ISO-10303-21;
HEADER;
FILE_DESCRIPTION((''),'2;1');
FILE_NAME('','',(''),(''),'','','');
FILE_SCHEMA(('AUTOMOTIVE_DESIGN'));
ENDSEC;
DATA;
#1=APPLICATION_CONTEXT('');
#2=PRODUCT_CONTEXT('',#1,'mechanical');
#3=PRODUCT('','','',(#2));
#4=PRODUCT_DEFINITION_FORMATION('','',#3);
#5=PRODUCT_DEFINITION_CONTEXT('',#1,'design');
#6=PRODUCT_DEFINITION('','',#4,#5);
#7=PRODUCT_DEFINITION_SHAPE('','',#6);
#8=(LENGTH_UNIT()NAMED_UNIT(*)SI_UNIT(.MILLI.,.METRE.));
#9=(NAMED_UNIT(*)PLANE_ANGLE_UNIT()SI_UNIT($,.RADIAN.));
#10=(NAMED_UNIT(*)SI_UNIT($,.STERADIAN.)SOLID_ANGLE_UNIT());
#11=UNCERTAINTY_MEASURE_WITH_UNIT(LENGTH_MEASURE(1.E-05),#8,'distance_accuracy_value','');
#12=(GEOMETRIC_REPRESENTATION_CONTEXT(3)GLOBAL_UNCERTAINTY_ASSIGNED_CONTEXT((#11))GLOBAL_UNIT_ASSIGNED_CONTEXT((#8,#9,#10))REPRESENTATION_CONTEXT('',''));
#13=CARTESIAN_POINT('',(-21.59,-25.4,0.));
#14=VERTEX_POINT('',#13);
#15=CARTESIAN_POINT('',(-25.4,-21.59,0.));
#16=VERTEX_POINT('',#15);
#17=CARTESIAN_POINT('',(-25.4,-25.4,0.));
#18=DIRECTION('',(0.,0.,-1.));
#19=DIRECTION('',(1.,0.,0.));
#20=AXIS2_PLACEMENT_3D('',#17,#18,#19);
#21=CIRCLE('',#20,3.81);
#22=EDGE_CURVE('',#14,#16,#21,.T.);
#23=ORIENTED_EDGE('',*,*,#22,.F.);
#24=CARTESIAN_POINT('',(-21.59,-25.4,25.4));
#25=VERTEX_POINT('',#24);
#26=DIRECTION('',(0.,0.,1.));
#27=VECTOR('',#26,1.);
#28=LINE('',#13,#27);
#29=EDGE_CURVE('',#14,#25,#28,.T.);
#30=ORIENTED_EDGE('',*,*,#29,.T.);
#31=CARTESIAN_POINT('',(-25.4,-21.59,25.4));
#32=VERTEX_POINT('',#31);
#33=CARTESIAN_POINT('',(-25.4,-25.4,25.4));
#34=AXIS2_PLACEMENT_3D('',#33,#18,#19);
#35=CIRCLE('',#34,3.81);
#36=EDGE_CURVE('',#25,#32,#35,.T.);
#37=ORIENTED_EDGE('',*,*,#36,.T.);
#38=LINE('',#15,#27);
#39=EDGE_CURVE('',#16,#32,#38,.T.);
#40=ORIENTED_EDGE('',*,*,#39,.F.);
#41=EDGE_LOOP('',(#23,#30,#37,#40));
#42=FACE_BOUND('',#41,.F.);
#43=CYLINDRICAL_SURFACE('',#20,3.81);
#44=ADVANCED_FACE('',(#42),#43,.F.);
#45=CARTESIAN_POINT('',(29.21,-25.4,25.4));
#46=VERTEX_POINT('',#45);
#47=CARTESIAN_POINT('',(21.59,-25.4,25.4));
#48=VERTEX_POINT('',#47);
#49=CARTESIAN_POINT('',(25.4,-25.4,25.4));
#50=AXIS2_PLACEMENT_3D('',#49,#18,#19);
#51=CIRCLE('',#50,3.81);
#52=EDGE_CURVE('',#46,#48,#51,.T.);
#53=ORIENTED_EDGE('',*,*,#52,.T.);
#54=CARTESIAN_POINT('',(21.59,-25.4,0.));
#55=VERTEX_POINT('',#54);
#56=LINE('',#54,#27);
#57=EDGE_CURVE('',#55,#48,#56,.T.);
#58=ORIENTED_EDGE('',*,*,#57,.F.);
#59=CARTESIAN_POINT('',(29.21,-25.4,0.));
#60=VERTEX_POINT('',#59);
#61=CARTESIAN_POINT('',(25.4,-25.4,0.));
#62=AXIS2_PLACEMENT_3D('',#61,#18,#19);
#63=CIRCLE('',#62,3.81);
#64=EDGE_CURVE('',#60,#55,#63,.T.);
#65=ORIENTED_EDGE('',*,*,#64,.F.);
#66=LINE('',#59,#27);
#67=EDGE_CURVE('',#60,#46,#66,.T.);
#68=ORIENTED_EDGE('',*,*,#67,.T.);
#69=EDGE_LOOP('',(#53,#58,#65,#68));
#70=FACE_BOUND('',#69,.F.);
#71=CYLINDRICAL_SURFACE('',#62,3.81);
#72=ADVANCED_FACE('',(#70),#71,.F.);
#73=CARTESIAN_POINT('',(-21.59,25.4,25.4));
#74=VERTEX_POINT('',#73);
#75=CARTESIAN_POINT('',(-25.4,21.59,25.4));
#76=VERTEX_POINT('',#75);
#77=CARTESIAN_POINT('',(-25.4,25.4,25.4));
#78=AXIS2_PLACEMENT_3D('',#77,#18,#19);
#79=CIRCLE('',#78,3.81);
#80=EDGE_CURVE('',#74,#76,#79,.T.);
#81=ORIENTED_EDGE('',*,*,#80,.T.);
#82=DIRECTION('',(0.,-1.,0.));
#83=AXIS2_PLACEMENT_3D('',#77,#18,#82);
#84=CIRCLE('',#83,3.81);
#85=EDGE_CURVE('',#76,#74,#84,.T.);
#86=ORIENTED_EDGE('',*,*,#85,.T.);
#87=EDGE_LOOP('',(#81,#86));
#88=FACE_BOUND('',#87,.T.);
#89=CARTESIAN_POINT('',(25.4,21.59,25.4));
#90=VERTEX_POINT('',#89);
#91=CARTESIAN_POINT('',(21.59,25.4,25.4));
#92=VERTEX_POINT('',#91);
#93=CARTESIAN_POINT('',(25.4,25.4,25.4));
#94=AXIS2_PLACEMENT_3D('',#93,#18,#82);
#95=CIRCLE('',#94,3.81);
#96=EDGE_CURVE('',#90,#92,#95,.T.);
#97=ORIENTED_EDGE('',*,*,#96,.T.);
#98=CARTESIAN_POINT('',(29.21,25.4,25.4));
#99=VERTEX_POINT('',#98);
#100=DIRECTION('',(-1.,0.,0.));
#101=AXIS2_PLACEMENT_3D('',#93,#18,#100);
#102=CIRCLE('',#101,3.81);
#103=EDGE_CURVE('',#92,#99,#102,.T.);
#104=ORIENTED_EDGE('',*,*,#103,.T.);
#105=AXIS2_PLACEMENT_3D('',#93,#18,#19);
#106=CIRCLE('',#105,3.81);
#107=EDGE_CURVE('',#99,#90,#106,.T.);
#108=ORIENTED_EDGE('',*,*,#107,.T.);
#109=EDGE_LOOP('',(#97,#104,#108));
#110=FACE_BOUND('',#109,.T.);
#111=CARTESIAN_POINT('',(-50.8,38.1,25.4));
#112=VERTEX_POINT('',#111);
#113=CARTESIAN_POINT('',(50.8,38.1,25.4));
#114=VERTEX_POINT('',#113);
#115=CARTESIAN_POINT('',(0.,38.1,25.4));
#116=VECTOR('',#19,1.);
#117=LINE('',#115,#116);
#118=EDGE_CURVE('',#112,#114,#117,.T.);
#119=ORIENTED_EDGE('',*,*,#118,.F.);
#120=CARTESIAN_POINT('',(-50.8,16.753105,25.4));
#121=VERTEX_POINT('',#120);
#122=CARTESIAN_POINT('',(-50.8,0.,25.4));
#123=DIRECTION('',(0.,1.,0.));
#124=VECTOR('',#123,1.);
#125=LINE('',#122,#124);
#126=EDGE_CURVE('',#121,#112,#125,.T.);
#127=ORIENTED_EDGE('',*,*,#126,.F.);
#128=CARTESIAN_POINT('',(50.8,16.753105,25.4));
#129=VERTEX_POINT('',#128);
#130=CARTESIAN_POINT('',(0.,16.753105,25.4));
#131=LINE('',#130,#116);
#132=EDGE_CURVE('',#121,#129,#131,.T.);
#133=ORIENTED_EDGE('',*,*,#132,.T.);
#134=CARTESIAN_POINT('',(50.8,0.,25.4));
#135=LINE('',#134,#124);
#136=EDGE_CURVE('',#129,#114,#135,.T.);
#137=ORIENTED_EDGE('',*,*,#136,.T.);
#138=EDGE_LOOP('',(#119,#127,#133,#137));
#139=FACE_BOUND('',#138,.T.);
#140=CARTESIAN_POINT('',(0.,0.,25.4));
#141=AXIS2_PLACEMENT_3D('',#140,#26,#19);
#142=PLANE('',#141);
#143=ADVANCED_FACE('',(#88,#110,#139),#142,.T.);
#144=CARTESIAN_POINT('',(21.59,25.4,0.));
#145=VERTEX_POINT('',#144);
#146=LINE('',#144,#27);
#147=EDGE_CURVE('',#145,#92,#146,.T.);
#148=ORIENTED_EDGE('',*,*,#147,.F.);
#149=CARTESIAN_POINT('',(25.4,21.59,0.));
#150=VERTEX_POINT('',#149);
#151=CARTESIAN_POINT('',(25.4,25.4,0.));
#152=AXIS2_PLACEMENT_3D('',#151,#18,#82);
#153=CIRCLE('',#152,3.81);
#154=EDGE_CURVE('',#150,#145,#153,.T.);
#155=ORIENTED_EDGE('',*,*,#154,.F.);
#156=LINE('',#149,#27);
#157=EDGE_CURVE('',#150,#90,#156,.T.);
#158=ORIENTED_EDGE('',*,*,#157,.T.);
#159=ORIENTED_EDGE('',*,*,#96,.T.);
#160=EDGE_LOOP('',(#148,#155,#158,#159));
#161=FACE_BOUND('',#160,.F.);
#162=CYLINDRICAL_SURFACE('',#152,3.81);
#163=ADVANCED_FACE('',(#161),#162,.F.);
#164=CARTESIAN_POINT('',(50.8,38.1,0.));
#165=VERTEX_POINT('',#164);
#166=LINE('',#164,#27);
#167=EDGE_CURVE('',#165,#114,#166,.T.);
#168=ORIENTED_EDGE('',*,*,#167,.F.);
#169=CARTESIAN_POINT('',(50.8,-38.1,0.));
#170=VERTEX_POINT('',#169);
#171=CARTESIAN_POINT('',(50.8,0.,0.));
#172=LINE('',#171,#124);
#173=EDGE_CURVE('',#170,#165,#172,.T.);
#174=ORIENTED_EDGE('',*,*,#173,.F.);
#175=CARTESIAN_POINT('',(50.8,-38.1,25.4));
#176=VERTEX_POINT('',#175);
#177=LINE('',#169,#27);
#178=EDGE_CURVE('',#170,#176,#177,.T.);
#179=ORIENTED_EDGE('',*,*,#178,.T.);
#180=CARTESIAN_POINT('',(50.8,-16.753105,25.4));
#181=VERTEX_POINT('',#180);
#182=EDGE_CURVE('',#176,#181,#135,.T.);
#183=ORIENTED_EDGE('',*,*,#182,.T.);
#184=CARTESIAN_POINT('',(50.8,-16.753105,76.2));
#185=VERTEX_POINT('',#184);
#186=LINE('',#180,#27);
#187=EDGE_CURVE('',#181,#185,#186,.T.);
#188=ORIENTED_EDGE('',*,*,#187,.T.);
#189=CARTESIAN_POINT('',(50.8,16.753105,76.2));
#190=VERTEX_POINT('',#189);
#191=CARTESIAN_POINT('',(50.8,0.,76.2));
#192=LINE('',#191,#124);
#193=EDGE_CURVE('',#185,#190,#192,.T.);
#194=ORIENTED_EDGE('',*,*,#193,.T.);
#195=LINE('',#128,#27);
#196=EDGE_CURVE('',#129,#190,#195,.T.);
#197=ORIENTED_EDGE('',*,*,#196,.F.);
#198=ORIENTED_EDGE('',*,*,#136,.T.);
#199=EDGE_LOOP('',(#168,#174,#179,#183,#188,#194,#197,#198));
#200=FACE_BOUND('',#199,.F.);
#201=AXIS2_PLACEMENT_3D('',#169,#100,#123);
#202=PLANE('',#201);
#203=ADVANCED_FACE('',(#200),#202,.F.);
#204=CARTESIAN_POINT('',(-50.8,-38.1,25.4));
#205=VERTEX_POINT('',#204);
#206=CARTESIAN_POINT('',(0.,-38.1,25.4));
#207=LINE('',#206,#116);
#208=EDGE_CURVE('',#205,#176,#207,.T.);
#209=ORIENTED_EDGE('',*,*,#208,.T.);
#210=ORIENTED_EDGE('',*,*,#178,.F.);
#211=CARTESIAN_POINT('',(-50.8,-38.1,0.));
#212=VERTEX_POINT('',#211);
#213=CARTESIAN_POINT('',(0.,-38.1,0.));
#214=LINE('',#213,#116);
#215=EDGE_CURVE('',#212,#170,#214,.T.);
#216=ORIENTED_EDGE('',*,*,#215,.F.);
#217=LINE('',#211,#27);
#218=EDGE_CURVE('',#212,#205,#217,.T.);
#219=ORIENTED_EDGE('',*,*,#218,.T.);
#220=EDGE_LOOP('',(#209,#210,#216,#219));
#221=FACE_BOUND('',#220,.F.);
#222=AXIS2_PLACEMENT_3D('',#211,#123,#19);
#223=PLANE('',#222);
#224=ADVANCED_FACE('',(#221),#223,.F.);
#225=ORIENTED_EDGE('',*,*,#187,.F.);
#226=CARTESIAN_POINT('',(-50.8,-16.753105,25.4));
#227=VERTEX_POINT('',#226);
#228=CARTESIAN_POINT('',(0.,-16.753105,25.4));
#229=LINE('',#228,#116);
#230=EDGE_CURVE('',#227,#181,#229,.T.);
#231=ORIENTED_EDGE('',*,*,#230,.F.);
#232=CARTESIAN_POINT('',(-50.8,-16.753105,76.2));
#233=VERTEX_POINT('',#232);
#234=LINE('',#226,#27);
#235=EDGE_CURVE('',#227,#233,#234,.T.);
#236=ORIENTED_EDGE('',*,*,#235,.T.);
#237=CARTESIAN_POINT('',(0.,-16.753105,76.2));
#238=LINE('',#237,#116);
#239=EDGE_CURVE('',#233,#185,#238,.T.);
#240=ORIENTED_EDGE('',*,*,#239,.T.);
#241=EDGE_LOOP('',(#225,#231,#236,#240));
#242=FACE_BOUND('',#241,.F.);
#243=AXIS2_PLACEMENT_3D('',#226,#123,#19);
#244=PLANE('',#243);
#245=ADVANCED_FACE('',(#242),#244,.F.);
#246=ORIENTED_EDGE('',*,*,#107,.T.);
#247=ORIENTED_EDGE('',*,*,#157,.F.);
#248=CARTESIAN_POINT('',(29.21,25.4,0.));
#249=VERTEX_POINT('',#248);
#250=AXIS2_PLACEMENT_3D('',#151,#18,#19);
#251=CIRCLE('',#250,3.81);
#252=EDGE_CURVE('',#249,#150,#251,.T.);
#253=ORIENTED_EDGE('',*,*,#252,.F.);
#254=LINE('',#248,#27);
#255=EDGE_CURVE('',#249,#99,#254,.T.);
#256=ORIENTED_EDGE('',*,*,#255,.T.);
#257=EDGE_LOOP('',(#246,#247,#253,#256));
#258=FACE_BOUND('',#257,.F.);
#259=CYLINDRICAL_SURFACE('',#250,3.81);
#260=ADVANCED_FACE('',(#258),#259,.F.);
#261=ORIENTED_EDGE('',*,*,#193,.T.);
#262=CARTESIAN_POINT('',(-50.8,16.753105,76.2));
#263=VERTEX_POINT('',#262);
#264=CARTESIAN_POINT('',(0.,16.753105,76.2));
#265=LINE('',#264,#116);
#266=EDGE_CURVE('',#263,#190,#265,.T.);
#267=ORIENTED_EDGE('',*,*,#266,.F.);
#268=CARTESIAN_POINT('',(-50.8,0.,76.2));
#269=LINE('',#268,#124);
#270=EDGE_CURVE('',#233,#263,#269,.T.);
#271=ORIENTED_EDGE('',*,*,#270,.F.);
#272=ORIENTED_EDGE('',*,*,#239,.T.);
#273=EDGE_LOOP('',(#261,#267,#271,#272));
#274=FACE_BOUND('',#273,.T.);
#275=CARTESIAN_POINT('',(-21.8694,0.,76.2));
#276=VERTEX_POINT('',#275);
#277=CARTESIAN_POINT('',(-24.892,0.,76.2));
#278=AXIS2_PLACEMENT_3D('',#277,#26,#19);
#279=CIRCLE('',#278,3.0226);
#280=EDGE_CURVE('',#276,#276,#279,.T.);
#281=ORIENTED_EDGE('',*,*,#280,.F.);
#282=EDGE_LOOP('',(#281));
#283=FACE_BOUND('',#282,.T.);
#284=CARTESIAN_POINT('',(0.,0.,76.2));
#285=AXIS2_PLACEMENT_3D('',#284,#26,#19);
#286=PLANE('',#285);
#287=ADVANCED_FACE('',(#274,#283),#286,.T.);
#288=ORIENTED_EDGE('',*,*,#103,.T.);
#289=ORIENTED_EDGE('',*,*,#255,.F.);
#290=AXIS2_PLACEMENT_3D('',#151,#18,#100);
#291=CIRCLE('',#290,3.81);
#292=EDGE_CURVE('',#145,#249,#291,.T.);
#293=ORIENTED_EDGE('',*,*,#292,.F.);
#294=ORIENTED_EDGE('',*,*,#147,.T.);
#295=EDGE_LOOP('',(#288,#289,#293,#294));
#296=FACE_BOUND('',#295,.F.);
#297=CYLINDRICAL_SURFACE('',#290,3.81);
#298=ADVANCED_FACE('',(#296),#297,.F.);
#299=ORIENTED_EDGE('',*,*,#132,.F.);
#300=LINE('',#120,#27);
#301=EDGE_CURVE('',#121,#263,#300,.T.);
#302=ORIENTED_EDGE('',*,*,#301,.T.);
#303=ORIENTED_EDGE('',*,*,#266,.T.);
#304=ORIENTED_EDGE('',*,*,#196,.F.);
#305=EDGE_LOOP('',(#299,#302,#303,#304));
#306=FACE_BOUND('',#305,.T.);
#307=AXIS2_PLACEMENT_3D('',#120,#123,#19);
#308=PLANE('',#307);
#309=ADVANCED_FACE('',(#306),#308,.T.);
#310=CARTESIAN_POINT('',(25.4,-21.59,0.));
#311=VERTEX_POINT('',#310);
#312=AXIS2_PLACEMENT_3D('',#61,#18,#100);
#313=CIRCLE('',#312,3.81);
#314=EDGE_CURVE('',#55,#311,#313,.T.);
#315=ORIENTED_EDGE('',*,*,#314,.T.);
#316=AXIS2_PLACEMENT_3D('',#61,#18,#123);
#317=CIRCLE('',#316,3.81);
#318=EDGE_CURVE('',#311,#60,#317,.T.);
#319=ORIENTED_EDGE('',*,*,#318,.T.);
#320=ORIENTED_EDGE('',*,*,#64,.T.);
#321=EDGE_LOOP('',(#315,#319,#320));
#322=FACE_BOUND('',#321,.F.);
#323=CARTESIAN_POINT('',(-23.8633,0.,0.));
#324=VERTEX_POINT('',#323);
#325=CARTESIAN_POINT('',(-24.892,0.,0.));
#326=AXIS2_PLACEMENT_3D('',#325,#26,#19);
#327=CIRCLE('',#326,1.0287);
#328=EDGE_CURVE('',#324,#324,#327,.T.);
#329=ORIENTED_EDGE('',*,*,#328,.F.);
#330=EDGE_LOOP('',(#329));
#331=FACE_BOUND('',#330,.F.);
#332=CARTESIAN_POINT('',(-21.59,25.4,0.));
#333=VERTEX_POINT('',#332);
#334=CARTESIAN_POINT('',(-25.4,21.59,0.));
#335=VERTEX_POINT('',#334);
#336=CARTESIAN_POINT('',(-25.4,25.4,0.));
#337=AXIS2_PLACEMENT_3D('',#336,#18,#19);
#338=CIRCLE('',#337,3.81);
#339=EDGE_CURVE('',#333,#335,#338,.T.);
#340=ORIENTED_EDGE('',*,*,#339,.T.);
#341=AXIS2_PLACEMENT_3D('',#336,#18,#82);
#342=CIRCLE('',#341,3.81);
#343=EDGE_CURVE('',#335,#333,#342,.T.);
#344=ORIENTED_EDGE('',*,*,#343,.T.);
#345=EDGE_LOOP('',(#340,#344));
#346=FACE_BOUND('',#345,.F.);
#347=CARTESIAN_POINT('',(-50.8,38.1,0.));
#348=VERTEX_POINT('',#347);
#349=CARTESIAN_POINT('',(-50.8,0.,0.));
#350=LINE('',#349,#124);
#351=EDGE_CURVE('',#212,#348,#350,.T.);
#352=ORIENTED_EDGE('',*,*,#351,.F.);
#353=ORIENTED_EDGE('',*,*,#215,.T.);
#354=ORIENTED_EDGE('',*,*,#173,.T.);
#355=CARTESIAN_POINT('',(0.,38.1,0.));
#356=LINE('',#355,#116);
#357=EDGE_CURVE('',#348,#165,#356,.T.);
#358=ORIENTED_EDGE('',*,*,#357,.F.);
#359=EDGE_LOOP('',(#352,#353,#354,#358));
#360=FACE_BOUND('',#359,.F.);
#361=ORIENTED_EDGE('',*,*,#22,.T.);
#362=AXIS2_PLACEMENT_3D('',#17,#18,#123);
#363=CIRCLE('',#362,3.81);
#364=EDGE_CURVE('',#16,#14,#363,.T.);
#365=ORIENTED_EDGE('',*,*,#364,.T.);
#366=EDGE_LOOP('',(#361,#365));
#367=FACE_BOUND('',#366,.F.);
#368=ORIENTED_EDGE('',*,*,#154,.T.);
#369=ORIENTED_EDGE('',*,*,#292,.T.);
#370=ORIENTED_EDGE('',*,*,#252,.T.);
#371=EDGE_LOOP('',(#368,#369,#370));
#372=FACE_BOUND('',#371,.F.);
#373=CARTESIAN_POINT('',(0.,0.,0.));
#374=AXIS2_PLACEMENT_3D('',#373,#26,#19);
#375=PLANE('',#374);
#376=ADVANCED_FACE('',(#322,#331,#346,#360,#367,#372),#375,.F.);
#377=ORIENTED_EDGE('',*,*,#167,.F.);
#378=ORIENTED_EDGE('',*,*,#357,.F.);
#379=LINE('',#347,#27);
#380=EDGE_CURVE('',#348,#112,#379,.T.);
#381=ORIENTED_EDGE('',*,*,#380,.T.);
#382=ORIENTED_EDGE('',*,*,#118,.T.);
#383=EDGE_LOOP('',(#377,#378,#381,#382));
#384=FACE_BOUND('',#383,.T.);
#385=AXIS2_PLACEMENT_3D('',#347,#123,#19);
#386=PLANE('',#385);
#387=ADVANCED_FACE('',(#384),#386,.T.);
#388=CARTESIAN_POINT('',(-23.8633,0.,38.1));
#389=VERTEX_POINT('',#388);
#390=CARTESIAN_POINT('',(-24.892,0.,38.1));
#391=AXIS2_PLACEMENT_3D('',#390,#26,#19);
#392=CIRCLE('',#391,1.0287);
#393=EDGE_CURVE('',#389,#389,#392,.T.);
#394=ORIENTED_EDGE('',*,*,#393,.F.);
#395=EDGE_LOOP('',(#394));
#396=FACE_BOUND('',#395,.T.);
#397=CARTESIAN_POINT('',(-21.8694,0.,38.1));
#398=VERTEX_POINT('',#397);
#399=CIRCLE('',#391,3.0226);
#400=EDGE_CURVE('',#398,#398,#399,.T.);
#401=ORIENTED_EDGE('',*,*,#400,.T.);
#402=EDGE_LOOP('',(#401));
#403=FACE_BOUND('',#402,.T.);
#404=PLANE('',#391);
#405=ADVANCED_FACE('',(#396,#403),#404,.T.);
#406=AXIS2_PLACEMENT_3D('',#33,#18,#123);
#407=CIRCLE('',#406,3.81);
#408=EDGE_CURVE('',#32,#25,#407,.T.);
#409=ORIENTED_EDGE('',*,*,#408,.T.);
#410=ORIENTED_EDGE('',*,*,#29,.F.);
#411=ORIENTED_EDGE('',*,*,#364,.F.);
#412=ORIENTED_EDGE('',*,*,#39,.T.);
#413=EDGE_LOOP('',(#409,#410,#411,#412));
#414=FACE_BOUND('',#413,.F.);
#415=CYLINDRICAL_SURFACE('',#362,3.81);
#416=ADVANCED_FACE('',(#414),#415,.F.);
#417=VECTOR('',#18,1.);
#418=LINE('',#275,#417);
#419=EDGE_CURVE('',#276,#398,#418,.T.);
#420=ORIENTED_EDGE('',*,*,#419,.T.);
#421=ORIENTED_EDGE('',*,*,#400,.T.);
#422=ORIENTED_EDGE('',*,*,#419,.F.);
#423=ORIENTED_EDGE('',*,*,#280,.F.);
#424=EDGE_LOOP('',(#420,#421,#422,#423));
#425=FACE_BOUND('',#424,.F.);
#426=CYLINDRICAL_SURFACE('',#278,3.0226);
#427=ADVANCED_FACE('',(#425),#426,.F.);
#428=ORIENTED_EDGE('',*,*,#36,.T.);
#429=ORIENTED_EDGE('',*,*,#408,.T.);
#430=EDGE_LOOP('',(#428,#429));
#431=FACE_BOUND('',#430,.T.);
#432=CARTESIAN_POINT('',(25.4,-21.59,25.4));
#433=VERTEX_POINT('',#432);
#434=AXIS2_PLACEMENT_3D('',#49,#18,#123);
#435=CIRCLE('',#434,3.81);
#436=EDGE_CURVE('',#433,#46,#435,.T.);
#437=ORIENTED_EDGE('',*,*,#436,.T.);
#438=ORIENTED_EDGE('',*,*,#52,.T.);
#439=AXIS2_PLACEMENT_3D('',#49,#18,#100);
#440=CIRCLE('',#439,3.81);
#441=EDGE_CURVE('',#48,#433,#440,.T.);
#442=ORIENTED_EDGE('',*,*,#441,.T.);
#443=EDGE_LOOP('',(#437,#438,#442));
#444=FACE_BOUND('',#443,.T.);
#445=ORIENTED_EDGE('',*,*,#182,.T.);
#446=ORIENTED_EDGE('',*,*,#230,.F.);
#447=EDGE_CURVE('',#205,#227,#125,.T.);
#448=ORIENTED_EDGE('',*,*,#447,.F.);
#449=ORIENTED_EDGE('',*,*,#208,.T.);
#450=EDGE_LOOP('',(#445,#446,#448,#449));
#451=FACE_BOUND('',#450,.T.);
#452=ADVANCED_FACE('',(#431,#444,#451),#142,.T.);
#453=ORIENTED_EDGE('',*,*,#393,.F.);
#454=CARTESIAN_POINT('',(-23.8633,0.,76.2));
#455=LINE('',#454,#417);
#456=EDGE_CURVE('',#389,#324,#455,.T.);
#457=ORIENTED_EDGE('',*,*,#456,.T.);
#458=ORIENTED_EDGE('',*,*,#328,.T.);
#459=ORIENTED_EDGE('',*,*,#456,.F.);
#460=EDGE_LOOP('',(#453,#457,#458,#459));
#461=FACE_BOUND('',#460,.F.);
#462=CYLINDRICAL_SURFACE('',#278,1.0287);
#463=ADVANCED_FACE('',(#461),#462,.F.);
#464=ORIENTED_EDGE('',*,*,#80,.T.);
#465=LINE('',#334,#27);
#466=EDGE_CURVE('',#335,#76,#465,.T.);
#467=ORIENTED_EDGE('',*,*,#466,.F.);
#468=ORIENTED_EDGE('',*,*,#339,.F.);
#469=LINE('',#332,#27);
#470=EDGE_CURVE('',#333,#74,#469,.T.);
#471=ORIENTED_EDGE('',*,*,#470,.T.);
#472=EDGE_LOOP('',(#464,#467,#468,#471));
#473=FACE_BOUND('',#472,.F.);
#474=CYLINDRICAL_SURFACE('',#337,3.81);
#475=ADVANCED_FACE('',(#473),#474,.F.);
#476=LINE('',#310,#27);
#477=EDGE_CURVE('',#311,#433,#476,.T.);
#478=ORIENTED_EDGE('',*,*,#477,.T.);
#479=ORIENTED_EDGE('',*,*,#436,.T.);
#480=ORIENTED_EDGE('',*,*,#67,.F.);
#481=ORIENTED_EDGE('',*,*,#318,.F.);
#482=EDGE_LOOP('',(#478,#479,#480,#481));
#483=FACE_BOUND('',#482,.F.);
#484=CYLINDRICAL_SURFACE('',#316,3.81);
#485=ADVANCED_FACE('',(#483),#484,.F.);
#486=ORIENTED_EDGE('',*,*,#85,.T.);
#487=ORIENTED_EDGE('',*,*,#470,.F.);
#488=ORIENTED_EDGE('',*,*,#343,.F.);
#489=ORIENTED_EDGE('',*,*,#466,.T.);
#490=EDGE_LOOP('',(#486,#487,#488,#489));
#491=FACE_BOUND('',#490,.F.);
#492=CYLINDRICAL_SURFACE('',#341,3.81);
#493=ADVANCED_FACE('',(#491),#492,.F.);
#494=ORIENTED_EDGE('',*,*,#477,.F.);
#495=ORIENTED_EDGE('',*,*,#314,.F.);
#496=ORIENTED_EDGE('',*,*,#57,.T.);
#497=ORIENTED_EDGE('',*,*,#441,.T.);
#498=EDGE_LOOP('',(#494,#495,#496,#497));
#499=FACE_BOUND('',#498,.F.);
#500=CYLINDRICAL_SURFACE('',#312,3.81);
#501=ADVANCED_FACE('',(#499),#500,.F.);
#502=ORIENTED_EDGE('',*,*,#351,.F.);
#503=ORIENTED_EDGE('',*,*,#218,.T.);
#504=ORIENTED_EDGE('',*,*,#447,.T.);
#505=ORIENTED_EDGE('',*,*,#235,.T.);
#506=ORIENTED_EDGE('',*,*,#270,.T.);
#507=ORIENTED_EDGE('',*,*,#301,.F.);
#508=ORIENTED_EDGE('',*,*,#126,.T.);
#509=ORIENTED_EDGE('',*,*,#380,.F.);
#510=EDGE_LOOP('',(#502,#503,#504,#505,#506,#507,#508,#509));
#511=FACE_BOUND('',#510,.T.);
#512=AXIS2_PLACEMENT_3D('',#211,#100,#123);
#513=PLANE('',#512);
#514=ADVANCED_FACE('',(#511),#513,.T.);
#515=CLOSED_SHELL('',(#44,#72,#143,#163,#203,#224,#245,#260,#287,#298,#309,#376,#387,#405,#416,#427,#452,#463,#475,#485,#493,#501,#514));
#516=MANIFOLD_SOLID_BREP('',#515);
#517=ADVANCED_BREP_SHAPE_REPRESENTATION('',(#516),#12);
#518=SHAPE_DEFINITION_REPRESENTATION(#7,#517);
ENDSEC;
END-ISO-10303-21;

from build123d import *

# Parameters (mm, degrees)
F0_W     = 101.6
F0_H     = 76.2
F1_DEPTH = 25.4
F2_W     = 101.6
F2_H     = 33.5062108934
F3_DEPTH = 50.8
F4_R     = 1.0287
F5_DEPTH = 101.6
F6_R     = 3.0226
F6_R_2   = 1.0287
F7_DEPTH = 38.1


with BuildPart() as f1:
    # F0 (on Top) → F1 (new body)
    with BuildSketch(Plane.XY):
        Rectangle(F0_W, F0_H)
        with BuildLine():
            ThreePointArc((-25.4, 21.59), (-28.0940768363, 28.0940768363), (-21.59, 25.4))
            Line((-21.59, 25.4), (21.59, 25.4))
            ThreePointArc((21.59, 25.4), (25.4, 29.21), (29.21, 25.4))
            ThreePointArc((29.21, 25.4), (28.0940768363, 22.7059231637), (25.4, 21.59))
            Line((25.4, 21.59), (25.4, -21.59))
            ThreePointArc((25.4, -21.59), (28.0940768363, -22.7059231637), (29.21, -25.4))
            ThreePointArc((29.21, -25.4), (25.4, -29.21), (21.59, -25.4))
            Line((21.59, -25.4), (-21.59, -25.4))
            ThreePointArc((-21.59, -25.4), (-28.0940768363, -28.0940768363), (-25.4, -21.59))
            Line((-25.4, -21.59), (-25.4, 21.59))
        make_face(mode=Mode.SUBTRACT)
        with BuildLine():
            Line((21.59, 25.4), (-21.59, 25.4))
            ThreePointArc((-21.59, 25.4), (-22.7059231637, 22.7059231637), (-25.4, 21.59))
            Line((-25.4, 21.59), (-25.4, -21.59))
            ThreePointArc((-25.4, -21.59), (-22.7059231637, -22.7059231637), (-21.59, -25.4))
            Line((-21.59, -25.4), (21.59, -25.4))
            ThreePointArc((21.59, -25.4), (22.7059231637, -22.7059231637), (25.4, -21.59))
            Line((25.4, -21.59), (25.4, 21.59))
            ThreePointArc((25.4, 21.59), (22.7059231637, 22.7059231637), (21.59, 25.4))
        make_face()
    extrude(amount=F1_DEPTH)

    # F2 (on face) → F3 (join)
    with BuildSketch(Plane.XY.offset(25.4)):
        Rectangle(F2_W, F2_H)
    extrude(amount=F3_DEPTH)

    # F4 (on face) → F5 (cut)
    with BuildSketch(Plane.XY.offset(76.2)):
        with Locations((-24.892, 0)):
            Circle(F4_R)
    extrude(amount=-F5_DEPTH, mode=Mode.SUBTRACT)

    # F6 (on face) → F7 (cut)
    with BuildSketch(Plane.XY.offset(76.2)):
        with Locations((-24.892, 0)):
            Circle(F6_R)
        with Locations((-24.892, 0)):
            Circle(F6_R_2, mode=Mode.SUBTRACT)
    extrude(amount=-F7_DEPTH, mode=Mode.SUBTRACT)


solid = f1.part
